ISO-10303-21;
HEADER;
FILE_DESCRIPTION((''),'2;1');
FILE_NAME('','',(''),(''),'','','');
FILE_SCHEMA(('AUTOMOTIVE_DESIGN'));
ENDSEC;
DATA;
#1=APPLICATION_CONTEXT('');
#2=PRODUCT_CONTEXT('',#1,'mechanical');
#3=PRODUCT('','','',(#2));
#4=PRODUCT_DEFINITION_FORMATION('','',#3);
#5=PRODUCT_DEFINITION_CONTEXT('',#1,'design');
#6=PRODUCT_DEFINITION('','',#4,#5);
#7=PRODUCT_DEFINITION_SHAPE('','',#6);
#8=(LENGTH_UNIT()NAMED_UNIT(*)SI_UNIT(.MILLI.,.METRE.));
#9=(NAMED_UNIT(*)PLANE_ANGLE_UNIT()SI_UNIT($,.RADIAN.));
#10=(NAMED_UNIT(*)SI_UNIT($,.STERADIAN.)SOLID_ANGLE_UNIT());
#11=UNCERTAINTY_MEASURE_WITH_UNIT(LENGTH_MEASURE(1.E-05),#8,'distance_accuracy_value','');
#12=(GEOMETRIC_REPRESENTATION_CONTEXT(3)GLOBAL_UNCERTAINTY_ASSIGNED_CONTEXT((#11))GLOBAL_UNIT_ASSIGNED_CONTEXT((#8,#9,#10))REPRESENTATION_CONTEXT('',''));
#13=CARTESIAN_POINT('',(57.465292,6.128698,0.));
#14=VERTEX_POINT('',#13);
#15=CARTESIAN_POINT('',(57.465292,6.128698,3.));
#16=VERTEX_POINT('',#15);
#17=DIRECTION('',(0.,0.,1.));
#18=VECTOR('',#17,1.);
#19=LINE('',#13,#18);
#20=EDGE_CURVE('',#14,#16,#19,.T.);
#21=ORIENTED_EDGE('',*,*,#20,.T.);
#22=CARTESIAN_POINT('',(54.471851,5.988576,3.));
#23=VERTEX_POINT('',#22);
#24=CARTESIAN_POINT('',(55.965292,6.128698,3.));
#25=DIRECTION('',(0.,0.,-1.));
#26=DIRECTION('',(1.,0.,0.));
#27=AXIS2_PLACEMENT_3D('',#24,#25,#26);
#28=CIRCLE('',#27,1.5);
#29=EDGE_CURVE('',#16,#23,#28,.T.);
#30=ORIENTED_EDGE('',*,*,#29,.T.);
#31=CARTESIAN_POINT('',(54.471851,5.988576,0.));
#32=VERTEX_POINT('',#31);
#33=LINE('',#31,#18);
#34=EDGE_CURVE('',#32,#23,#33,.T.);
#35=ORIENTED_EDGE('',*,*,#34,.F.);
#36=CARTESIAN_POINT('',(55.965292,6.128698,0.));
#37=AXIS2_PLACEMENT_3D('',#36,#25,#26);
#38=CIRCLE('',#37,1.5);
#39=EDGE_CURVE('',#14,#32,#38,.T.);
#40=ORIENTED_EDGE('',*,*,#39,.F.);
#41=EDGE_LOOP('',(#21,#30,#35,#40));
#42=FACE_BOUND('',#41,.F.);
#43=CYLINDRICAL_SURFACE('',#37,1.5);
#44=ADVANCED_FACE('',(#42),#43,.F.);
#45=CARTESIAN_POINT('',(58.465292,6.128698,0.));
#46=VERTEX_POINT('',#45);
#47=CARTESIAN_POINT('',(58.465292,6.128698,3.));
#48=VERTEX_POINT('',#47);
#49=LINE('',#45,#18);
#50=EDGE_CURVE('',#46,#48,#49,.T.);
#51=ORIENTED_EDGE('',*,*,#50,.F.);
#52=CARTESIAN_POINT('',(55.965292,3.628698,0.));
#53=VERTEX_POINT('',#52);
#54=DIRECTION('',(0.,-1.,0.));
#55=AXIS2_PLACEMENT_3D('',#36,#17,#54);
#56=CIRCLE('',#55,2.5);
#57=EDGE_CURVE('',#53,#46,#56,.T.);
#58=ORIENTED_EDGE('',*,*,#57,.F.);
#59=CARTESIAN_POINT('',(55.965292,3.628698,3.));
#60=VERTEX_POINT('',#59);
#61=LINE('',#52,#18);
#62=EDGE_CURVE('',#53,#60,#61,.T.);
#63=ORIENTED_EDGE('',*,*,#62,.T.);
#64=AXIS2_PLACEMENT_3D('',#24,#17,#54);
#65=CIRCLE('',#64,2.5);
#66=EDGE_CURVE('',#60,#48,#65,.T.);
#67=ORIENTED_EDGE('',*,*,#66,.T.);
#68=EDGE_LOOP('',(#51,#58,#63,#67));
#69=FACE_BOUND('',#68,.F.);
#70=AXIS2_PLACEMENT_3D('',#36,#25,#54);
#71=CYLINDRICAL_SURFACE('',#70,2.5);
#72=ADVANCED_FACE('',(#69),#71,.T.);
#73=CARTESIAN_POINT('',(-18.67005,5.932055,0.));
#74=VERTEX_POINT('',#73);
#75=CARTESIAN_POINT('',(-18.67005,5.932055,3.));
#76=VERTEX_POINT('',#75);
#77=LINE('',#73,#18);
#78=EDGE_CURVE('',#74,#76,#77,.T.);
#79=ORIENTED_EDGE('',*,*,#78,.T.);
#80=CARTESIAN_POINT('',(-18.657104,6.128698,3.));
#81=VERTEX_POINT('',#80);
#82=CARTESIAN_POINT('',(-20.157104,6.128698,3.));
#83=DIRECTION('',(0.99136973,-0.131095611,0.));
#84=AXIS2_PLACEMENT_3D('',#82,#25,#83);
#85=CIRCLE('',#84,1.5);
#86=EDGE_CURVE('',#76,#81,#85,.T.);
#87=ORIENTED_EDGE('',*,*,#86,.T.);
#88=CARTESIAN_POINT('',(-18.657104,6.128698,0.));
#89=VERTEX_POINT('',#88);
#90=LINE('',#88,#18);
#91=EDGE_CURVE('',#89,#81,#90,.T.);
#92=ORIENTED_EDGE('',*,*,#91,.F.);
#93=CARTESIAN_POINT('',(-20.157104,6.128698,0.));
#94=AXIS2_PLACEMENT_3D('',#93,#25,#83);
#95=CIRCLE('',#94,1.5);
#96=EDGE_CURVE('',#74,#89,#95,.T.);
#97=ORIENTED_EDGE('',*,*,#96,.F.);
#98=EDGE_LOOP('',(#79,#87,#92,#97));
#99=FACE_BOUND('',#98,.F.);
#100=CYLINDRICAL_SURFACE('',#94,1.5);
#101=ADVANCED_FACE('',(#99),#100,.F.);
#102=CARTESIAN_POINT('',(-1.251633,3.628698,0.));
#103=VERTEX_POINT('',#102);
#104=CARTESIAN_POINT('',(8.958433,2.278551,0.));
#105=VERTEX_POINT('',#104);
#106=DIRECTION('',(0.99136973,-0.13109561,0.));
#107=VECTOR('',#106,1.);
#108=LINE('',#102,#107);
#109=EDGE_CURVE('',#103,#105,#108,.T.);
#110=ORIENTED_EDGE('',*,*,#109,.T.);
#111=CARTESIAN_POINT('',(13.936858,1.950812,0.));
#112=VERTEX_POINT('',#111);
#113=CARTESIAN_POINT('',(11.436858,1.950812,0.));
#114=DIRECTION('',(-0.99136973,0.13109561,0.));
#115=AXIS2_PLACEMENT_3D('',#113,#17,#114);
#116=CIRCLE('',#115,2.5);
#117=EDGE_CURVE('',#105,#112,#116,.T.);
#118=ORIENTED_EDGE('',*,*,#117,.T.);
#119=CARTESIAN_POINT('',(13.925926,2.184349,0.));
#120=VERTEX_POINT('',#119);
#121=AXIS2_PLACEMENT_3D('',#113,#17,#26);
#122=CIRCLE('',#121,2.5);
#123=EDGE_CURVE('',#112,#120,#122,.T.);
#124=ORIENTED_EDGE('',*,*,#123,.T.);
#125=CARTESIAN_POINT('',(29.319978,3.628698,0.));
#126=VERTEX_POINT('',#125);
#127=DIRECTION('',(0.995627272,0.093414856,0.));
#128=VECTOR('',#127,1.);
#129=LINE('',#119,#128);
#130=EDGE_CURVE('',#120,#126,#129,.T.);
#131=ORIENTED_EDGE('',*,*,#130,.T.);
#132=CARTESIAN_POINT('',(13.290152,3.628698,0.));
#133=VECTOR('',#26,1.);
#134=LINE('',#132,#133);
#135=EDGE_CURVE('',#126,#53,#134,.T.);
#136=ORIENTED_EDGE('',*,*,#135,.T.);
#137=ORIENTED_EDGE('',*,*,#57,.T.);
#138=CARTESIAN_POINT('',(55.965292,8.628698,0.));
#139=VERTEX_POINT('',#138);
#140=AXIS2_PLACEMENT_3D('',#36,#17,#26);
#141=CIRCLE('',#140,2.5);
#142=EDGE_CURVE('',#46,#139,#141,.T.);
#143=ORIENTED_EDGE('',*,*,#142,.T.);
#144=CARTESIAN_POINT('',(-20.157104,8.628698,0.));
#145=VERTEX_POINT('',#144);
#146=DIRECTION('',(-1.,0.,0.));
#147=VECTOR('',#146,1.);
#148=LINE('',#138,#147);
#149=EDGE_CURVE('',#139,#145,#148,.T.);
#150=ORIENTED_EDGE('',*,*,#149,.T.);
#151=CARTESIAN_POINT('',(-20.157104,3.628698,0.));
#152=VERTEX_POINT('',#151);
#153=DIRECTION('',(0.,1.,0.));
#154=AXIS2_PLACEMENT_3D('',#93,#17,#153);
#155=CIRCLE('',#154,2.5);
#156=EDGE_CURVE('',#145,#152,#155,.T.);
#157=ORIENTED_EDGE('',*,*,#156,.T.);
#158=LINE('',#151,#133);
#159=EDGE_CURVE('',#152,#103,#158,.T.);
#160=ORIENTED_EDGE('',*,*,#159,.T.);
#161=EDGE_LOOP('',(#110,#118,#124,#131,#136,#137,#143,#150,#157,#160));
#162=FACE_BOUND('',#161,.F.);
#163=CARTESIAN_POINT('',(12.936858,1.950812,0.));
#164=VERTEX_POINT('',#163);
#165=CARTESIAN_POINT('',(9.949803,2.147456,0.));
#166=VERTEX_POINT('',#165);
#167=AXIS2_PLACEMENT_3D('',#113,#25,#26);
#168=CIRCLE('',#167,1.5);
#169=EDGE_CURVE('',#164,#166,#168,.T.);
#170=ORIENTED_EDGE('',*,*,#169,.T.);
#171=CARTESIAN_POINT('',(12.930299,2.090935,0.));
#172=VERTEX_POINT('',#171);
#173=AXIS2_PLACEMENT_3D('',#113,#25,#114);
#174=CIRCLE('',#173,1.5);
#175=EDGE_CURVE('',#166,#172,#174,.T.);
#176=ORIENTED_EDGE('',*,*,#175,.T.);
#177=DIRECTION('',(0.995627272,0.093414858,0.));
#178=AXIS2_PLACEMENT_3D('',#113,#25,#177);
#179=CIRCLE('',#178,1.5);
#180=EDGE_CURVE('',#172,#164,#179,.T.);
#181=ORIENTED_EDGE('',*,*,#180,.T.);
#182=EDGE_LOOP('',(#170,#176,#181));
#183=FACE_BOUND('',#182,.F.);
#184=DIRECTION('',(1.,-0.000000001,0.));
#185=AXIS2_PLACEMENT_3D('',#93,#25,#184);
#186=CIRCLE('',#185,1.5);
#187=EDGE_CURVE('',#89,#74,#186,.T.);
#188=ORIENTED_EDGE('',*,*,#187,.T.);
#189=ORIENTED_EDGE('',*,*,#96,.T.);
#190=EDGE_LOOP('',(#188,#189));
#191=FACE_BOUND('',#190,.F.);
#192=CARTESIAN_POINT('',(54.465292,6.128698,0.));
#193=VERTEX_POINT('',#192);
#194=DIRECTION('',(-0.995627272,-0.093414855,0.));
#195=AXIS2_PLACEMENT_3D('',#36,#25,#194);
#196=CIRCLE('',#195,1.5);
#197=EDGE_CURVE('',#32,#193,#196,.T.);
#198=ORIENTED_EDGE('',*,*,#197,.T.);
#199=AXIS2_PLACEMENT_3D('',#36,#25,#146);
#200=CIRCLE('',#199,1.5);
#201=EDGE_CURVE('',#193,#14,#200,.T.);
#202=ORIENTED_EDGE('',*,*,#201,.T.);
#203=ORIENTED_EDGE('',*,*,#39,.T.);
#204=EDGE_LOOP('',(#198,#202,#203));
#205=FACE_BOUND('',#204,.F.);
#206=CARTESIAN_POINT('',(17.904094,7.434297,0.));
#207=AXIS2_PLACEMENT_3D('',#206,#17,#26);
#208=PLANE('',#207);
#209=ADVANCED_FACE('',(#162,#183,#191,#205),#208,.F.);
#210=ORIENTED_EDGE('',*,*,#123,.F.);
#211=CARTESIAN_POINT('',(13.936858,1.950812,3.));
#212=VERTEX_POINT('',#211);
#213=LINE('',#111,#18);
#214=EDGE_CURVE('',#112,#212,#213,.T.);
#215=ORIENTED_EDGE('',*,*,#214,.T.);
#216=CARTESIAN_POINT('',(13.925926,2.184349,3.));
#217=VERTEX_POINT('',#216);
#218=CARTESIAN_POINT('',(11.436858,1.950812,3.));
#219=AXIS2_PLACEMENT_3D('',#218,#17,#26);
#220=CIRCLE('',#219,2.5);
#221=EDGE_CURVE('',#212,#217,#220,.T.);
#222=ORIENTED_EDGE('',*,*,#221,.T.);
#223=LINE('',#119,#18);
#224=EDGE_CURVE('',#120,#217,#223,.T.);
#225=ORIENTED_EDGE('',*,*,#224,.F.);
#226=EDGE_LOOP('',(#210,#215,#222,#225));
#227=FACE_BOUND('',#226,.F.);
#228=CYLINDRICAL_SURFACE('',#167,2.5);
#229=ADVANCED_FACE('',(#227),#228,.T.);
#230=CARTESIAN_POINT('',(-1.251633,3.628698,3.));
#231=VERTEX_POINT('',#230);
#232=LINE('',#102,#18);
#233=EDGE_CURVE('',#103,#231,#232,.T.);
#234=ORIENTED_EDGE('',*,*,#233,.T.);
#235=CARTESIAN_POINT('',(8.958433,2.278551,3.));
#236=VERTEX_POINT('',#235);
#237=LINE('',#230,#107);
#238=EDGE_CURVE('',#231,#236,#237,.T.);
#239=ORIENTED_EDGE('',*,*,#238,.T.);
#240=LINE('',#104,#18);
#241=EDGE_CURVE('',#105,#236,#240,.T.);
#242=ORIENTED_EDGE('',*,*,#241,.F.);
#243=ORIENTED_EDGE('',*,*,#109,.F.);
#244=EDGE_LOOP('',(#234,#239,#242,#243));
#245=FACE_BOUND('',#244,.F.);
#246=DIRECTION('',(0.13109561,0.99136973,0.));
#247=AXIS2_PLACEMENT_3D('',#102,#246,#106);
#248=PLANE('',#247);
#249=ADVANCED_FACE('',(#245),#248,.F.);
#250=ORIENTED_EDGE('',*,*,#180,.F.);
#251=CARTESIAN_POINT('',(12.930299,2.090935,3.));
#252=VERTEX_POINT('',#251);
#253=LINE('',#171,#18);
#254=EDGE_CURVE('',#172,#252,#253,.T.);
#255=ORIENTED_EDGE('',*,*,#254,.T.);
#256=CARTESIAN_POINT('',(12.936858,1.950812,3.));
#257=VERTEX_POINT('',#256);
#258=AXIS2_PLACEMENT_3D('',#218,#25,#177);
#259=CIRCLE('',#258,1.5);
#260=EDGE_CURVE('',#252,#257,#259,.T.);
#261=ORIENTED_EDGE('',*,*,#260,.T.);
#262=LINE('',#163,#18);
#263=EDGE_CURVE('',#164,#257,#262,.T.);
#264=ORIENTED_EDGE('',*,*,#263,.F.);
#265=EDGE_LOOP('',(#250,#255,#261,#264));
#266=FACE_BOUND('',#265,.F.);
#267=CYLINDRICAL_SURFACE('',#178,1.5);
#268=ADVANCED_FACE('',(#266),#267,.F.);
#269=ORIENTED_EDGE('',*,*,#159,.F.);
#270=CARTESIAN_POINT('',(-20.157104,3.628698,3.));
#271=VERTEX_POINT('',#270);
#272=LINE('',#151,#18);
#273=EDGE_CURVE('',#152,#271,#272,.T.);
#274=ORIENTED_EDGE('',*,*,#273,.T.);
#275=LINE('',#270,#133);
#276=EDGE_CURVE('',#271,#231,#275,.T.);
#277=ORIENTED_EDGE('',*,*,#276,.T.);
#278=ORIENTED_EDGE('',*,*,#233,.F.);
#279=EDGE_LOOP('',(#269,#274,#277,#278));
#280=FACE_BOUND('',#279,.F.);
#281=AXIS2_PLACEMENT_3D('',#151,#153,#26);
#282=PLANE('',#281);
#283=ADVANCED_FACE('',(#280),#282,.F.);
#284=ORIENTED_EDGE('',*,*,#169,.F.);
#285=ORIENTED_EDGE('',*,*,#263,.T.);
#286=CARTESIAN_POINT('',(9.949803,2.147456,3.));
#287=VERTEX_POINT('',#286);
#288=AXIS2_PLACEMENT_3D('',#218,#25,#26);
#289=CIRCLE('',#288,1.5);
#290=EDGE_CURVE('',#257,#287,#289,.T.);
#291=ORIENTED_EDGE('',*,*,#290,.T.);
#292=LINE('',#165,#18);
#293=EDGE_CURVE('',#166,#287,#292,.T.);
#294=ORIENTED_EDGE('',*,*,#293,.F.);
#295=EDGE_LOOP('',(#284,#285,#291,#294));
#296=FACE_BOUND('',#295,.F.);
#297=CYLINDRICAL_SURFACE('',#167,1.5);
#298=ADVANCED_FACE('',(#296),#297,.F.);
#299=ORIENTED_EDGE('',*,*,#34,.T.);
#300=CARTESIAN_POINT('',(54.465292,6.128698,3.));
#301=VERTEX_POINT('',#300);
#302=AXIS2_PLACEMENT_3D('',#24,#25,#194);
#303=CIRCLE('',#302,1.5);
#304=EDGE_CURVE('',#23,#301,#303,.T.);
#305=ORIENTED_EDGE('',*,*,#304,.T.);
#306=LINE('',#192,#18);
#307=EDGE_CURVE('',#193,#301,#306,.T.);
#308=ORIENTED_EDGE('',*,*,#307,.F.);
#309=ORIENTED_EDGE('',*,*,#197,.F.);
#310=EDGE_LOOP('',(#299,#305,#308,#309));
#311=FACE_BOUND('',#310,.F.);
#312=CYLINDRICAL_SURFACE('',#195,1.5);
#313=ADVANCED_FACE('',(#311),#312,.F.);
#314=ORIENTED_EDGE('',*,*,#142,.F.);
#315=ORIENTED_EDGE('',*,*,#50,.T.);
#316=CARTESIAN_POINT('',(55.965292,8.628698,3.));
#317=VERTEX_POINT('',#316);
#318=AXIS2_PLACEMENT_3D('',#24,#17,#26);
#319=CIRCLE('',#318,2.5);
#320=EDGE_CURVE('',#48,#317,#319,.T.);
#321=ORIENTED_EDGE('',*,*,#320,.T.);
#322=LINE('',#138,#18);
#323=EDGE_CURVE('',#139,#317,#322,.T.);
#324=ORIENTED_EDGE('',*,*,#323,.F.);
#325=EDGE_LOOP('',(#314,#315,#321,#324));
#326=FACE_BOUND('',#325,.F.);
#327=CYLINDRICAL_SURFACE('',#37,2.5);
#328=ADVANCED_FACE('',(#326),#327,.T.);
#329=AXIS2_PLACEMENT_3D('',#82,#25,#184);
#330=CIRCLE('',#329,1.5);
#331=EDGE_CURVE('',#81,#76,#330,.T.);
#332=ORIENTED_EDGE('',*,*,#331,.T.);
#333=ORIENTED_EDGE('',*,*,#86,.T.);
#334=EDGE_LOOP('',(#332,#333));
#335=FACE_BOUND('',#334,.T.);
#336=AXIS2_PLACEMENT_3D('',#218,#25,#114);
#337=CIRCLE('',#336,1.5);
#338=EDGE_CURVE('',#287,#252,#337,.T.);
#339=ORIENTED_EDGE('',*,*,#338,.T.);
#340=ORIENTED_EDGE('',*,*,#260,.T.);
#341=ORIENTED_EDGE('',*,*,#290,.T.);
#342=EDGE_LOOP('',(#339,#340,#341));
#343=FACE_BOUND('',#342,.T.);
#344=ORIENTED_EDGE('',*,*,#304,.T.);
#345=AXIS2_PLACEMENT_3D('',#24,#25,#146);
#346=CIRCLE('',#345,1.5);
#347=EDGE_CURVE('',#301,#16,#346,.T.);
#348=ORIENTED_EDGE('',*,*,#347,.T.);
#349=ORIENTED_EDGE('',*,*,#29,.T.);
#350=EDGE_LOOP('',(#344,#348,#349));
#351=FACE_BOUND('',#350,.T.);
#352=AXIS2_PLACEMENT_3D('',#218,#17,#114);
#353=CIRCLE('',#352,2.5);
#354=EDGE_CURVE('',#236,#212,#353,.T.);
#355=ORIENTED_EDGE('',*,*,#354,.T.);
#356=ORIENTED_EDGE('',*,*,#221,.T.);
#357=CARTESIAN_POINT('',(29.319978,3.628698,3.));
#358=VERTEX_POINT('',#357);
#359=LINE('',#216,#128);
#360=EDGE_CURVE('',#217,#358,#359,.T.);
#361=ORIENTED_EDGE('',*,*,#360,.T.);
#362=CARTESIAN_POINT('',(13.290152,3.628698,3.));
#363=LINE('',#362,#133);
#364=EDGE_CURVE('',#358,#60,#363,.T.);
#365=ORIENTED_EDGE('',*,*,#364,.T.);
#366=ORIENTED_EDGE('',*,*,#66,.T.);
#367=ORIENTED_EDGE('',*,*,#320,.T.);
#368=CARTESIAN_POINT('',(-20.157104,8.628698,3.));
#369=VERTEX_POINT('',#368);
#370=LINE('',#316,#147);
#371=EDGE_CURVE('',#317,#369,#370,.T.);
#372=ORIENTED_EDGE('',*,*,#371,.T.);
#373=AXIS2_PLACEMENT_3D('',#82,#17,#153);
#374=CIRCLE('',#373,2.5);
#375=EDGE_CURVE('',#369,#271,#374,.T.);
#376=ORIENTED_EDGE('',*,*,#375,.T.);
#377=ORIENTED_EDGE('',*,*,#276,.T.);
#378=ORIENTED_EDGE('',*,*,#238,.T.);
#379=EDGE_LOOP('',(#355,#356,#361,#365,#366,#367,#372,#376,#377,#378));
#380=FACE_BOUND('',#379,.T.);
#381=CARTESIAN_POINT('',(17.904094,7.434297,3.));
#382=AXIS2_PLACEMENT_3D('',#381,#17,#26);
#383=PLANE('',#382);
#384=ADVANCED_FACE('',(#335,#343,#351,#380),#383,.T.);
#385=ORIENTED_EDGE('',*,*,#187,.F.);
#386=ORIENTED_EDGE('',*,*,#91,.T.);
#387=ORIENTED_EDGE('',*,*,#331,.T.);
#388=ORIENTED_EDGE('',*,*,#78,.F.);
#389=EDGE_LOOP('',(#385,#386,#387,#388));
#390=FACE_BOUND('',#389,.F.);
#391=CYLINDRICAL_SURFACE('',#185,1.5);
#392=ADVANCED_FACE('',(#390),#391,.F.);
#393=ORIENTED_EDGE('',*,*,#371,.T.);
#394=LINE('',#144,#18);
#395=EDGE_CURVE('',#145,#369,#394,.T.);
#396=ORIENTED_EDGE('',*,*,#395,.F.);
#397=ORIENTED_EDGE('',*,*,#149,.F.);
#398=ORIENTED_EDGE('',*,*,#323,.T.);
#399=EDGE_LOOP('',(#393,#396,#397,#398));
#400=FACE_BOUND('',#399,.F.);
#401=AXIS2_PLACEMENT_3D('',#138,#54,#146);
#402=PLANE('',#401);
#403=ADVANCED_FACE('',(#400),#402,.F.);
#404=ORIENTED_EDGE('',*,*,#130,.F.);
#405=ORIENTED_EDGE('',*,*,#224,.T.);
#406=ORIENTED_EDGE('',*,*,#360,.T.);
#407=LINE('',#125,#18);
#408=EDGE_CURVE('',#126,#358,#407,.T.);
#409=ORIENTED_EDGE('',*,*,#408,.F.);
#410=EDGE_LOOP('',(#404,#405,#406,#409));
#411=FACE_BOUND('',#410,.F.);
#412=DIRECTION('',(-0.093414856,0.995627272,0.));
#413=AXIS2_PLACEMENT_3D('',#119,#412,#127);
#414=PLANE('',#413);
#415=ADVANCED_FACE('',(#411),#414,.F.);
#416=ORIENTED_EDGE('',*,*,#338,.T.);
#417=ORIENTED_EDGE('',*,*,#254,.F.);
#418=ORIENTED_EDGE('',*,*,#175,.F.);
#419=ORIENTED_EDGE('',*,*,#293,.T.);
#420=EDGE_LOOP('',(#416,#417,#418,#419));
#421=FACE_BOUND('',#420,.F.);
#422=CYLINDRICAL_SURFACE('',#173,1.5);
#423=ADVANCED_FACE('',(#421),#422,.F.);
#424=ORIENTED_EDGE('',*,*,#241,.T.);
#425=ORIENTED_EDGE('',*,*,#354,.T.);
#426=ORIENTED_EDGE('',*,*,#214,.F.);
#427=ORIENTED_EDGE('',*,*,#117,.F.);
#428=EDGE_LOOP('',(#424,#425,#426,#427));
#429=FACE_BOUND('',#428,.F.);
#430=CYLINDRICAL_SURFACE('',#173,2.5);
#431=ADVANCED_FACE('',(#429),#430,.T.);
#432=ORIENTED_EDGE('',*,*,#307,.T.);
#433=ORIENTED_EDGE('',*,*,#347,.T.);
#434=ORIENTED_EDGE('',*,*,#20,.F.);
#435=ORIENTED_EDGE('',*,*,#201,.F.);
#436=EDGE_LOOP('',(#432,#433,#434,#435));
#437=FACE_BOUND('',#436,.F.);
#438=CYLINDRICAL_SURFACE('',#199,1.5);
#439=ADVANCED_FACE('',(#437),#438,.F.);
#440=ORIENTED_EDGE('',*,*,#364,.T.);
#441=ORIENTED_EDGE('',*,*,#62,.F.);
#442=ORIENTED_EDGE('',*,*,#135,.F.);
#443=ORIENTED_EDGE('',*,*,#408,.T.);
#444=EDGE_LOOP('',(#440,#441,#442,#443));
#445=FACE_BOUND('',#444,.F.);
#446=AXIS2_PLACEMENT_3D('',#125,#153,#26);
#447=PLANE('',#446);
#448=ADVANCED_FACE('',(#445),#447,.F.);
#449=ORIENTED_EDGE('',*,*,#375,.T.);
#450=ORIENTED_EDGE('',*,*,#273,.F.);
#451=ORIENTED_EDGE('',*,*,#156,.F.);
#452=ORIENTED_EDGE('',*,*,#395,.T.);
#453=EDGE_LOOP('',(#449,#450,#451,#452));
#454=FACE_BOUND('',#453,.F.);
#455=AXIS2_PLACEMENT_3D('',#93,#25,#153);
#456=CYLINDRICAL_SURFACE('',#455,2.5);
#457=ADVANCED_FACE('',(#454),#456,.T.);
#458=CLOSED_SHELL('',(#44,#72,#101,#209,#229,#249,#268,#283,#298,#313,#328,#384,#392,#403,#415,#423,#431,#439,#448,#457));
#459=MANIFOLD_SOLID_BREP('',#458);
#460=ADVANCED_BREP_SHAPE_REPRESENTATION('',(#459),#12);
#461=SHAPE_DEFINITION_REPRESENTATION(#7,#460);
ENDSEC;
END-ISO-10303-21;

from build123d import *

# Parameters (mm, degrees)
F1_DEPTH = 3


# Not quite as in the source:
# - a feature of the source that left no trace in its solid (it failed there, or was rolled back) is left out


with BuildPart() as f1:
    # F0 (on Top) → F1 (new body)
    with BuildSketch(Plane.XY):
        with BuildLine():
            ThreePointArc((-20.1571040975, 8.6286983024), (-18.3893371446, 7.8964652554), (-17.6571040975, 6.1286983024))
            Line((-17.6571040975, 6.1286983024), (53.465291932, 6.1286983024))
            ThreePointArc((53.465291932, 6.1286983024), (54.1975249791, 7.8964652554), (55.965291932, 8.6286983024))
            Line((55.965291932, 8.6286983024), (-20.1571040975, 8.6286983024))
        make_face()
        with BuildLine():
            Line((-18.6571040975, 6.1286983024), (-17.6571040975, 6.1286983024))
            ThreePointArc((-17.6571040975, 6.1286983024), (-18.3893371446, 7.8964652554), (-20.1571040975, 8.6286983024))
            ThreePointArc((-20.1571040975, 8.6286983024), (-22.6571040975, 6.1286983024), (-20.1571040975, 3.6286983024))
            ThreePointArc((-20.1571040975, 3.6286983024), (-18.5092794047, 4.2486254895), (-17.6786797732, 5.800959277))
            Line((-17.6786797732, 5.800959277), (-18.670049503, 5.9320548872))
            ThreePointArc((-18.670049503, 5.9320548872), (-21.6538642473, 6.2272328348), (-18.6571040975, 6.1286983024))
        make_face()
        with BuildLine():
            Line((53.465291932, 6.1286983024), (-17.6571040975, 6.1286983024))
            ThreePointArc((-17.6571040975, 6.1286983024), (-17.6625038479, 5.9644740818), (-17.6786797732, 5.800959277))
            Line((-17.6786797732, 5.800959277), (-1.2516325751, 3.6286983024))
            Line((-1.2516325751, 3.6286983024), (9.58356384, 3.6286983024))
            ThreePointArc((9.58356384, 3.6286983024), (11.4368578188, 4.4508123027), (13.2901517977, 3.6286983024))
            Line((13.2901517977, 3.6286983024), (29.319977701, 3.6286983024))
            Line((29.319977701, 3.6286983024), (53.476223752, 5.8951611635))
            ThreePointArc((53.476223752, 5.8951611635), (53.4680263825, 6.011801874), (53.465291932, 6.1286983024))
        make_face()
        with BuildLine():
            ThreePointArc((55.965291932, 8.6286983024), (54.1975249791, 7.8964652554), (53.465291932, 6.1286983024))
            Line((53.465291932, 6.1286983024), (54.465291932, 6.1286983024))
            ThreePointArc((54.465291932, 6.1286983024), (55.965291932, 7.6286983024), (57.465291932, 6.1286983024))
            ThreePointArc((57.465291932, 6.1286983024), (56.0354297891, 4.6303389727), (54.471851024, 5.9885760191))
            Line((54.471851024, 5.9885760191), (53.476223752, 5.8951611635))
            ThreePointArc((53.476223752, 5.8951611635), (54.2821167848, 4.2802066406), (55.965291932, 3.6286983024))
            ThreePointArc((55.965291932, 3.6286983024), (57.733058885, 4.3609313494), (58.465291932, 6.1286983024))
            ThreePointArc((58.465291932, 6.1286983024), (57.733058885, 7.8964652554), (55.965291932, 8.6286983024))
        make_face()
        with BuildLine():
            Line((-1.2516325751, 3.6286983024), (-17.6786797732, 5.800959277))
            ThreePointArc((-17.6786797732, 5.800959277), (-18.5092794047, 4.2486254895), (-20.1571040975, 3.6286983024))
            Line((-20.1571040975, 3.6286983024), (-1.2516325751, 3.6286983024))
        make_face()
        with BuildLine():
            ThreePointArc((55.965291932, 3.6286983024), (54.2821167848, 4.2802066406), (53.476223752, 5.8951611635))
            Line((53.476223752, 5.8951611635), (29.319977701, 3.6286983024))
            Line((29.319977701, 3.6286983024), (55.965291932, 3.6286983024))
        make_face()
        with BuildLine():
            Line((9.58356384, 3.6286983024), (-1.2516325751, 3.6286983024))
            Line((-1.2516325751, 3.6286983024), (8.9584334945, 2.2785513281))
            ThreePointArc((8.9584334945, 2.2785513281), (9.1682304635, 3.0012074295), (9.58356384, 3.6286983024))
        make_face()
        with BuildLine():
            Line((13.9259259989, 2.1843494416), (29.319977701, 3.6286983024))
            Line((29.319977701, 3.6286983024), (13.2901517977, 3.6286983024))
            ThreePointArc((13.2901517977, 3.6286983024), (13.7249931268, 2.9580048426), (13.9259259989, 2.1843494416))
        make_face()
        with BuildLine():
            ThreePointArc((9.58356384, 3.6286983024), (9.1682304635, 3.0012074295), (8.9584334945, 2.2785513281))
            Line((8.9584334945, 2.2785513281), (9.9498032243, 2.1474557179))
            ThreePointArc((9.9498032243, 2.1474557179), (11.4652982098, 3.4505426599), (12.9302987268, 2.090934586))
            Line((12.9302987268, 2.090934586), (13.9259259989, 2.1843494416))
            ThreePointArc((13.9259259989, 2.1843494416), (13.7249931268, 2.9580048426), (13.2901517977, 3.6286983024))
            Line((13.2901517977, 3.6286983024), (9.58356384, 3.6286983024))
        make_face()
        with BuildLine():
            Line((9.9498032243, 2.1474557179), (8.9584334945, 2.2785513281))
            ThreePointArc((8.9584334945, 2.2785513281), (11.2726335982, -0.5437879469), (13.9368578188, 1.9508123027))
            ThreePointArc((13.9368578188, 1.9508123027), (13.9341233684, 2.0677087311), (13.9259259989, 2.1843494416))
            Line((13.9259259989, 2.1843494416), (12.9302987268, 2.090934586))
            ThreePointArc((12.9302987268, 2.090934586), (12.9352171486, 2.0209501598), (12.9368578188, 1.9508123027))
            ThreePointArc((12.9368578188, 1.9508123027), (11.3383232865, 0.4540521529), (9.9498032243, 2.1474557179))
        make_face()
        with BuildLine():
            ThreePointArc((13.2901517977, 3.6286983024), (11.4368578188, 4.4508123027), (9.58356384, 3.6286983024))
            Line((9.58356384, 3.6286983024), (13.2901517977, 3.6286983024))
        make_face()
        with BuildLine():
            ThreePointArc((-17.6786797732, 5.800959277), (-17.6625038479, 5.9644740818), (-17.6571040975, 6.1286983024))
            Line((-17.6571040975, 6.1286983024), (-18.6571040975, 6.1286983024))
            ThreePointArc((-18.6571040975, 6.1286983024), (-18.6603439478, 6.03016377), (-18.670049503, 5.9320548872))
            Line((-18.670049503, 5.9320548872), (-17.6786797732, 5.800959277))
        make_face()
        with BuildLine():
            Line((54.465291932, 6.1286983024), (53.465291932, 6.1286983024))
            ThreePointArc((53.465291932, 6.1286983024), (53.4680263825, 6.011801874), (53.476223752, 5.8951611635))
            Line((53.476223752, 5.8951611635), (54.471851024, 5.9885760191))
            ThreePointArc((54.471851024, 5.9885760191), (54.4669326023, 6.0585604453), (54.465291932, 6.1286983024))
        make_face()
    extrude(amount=F1_DEPTH)


solid = f1.part
